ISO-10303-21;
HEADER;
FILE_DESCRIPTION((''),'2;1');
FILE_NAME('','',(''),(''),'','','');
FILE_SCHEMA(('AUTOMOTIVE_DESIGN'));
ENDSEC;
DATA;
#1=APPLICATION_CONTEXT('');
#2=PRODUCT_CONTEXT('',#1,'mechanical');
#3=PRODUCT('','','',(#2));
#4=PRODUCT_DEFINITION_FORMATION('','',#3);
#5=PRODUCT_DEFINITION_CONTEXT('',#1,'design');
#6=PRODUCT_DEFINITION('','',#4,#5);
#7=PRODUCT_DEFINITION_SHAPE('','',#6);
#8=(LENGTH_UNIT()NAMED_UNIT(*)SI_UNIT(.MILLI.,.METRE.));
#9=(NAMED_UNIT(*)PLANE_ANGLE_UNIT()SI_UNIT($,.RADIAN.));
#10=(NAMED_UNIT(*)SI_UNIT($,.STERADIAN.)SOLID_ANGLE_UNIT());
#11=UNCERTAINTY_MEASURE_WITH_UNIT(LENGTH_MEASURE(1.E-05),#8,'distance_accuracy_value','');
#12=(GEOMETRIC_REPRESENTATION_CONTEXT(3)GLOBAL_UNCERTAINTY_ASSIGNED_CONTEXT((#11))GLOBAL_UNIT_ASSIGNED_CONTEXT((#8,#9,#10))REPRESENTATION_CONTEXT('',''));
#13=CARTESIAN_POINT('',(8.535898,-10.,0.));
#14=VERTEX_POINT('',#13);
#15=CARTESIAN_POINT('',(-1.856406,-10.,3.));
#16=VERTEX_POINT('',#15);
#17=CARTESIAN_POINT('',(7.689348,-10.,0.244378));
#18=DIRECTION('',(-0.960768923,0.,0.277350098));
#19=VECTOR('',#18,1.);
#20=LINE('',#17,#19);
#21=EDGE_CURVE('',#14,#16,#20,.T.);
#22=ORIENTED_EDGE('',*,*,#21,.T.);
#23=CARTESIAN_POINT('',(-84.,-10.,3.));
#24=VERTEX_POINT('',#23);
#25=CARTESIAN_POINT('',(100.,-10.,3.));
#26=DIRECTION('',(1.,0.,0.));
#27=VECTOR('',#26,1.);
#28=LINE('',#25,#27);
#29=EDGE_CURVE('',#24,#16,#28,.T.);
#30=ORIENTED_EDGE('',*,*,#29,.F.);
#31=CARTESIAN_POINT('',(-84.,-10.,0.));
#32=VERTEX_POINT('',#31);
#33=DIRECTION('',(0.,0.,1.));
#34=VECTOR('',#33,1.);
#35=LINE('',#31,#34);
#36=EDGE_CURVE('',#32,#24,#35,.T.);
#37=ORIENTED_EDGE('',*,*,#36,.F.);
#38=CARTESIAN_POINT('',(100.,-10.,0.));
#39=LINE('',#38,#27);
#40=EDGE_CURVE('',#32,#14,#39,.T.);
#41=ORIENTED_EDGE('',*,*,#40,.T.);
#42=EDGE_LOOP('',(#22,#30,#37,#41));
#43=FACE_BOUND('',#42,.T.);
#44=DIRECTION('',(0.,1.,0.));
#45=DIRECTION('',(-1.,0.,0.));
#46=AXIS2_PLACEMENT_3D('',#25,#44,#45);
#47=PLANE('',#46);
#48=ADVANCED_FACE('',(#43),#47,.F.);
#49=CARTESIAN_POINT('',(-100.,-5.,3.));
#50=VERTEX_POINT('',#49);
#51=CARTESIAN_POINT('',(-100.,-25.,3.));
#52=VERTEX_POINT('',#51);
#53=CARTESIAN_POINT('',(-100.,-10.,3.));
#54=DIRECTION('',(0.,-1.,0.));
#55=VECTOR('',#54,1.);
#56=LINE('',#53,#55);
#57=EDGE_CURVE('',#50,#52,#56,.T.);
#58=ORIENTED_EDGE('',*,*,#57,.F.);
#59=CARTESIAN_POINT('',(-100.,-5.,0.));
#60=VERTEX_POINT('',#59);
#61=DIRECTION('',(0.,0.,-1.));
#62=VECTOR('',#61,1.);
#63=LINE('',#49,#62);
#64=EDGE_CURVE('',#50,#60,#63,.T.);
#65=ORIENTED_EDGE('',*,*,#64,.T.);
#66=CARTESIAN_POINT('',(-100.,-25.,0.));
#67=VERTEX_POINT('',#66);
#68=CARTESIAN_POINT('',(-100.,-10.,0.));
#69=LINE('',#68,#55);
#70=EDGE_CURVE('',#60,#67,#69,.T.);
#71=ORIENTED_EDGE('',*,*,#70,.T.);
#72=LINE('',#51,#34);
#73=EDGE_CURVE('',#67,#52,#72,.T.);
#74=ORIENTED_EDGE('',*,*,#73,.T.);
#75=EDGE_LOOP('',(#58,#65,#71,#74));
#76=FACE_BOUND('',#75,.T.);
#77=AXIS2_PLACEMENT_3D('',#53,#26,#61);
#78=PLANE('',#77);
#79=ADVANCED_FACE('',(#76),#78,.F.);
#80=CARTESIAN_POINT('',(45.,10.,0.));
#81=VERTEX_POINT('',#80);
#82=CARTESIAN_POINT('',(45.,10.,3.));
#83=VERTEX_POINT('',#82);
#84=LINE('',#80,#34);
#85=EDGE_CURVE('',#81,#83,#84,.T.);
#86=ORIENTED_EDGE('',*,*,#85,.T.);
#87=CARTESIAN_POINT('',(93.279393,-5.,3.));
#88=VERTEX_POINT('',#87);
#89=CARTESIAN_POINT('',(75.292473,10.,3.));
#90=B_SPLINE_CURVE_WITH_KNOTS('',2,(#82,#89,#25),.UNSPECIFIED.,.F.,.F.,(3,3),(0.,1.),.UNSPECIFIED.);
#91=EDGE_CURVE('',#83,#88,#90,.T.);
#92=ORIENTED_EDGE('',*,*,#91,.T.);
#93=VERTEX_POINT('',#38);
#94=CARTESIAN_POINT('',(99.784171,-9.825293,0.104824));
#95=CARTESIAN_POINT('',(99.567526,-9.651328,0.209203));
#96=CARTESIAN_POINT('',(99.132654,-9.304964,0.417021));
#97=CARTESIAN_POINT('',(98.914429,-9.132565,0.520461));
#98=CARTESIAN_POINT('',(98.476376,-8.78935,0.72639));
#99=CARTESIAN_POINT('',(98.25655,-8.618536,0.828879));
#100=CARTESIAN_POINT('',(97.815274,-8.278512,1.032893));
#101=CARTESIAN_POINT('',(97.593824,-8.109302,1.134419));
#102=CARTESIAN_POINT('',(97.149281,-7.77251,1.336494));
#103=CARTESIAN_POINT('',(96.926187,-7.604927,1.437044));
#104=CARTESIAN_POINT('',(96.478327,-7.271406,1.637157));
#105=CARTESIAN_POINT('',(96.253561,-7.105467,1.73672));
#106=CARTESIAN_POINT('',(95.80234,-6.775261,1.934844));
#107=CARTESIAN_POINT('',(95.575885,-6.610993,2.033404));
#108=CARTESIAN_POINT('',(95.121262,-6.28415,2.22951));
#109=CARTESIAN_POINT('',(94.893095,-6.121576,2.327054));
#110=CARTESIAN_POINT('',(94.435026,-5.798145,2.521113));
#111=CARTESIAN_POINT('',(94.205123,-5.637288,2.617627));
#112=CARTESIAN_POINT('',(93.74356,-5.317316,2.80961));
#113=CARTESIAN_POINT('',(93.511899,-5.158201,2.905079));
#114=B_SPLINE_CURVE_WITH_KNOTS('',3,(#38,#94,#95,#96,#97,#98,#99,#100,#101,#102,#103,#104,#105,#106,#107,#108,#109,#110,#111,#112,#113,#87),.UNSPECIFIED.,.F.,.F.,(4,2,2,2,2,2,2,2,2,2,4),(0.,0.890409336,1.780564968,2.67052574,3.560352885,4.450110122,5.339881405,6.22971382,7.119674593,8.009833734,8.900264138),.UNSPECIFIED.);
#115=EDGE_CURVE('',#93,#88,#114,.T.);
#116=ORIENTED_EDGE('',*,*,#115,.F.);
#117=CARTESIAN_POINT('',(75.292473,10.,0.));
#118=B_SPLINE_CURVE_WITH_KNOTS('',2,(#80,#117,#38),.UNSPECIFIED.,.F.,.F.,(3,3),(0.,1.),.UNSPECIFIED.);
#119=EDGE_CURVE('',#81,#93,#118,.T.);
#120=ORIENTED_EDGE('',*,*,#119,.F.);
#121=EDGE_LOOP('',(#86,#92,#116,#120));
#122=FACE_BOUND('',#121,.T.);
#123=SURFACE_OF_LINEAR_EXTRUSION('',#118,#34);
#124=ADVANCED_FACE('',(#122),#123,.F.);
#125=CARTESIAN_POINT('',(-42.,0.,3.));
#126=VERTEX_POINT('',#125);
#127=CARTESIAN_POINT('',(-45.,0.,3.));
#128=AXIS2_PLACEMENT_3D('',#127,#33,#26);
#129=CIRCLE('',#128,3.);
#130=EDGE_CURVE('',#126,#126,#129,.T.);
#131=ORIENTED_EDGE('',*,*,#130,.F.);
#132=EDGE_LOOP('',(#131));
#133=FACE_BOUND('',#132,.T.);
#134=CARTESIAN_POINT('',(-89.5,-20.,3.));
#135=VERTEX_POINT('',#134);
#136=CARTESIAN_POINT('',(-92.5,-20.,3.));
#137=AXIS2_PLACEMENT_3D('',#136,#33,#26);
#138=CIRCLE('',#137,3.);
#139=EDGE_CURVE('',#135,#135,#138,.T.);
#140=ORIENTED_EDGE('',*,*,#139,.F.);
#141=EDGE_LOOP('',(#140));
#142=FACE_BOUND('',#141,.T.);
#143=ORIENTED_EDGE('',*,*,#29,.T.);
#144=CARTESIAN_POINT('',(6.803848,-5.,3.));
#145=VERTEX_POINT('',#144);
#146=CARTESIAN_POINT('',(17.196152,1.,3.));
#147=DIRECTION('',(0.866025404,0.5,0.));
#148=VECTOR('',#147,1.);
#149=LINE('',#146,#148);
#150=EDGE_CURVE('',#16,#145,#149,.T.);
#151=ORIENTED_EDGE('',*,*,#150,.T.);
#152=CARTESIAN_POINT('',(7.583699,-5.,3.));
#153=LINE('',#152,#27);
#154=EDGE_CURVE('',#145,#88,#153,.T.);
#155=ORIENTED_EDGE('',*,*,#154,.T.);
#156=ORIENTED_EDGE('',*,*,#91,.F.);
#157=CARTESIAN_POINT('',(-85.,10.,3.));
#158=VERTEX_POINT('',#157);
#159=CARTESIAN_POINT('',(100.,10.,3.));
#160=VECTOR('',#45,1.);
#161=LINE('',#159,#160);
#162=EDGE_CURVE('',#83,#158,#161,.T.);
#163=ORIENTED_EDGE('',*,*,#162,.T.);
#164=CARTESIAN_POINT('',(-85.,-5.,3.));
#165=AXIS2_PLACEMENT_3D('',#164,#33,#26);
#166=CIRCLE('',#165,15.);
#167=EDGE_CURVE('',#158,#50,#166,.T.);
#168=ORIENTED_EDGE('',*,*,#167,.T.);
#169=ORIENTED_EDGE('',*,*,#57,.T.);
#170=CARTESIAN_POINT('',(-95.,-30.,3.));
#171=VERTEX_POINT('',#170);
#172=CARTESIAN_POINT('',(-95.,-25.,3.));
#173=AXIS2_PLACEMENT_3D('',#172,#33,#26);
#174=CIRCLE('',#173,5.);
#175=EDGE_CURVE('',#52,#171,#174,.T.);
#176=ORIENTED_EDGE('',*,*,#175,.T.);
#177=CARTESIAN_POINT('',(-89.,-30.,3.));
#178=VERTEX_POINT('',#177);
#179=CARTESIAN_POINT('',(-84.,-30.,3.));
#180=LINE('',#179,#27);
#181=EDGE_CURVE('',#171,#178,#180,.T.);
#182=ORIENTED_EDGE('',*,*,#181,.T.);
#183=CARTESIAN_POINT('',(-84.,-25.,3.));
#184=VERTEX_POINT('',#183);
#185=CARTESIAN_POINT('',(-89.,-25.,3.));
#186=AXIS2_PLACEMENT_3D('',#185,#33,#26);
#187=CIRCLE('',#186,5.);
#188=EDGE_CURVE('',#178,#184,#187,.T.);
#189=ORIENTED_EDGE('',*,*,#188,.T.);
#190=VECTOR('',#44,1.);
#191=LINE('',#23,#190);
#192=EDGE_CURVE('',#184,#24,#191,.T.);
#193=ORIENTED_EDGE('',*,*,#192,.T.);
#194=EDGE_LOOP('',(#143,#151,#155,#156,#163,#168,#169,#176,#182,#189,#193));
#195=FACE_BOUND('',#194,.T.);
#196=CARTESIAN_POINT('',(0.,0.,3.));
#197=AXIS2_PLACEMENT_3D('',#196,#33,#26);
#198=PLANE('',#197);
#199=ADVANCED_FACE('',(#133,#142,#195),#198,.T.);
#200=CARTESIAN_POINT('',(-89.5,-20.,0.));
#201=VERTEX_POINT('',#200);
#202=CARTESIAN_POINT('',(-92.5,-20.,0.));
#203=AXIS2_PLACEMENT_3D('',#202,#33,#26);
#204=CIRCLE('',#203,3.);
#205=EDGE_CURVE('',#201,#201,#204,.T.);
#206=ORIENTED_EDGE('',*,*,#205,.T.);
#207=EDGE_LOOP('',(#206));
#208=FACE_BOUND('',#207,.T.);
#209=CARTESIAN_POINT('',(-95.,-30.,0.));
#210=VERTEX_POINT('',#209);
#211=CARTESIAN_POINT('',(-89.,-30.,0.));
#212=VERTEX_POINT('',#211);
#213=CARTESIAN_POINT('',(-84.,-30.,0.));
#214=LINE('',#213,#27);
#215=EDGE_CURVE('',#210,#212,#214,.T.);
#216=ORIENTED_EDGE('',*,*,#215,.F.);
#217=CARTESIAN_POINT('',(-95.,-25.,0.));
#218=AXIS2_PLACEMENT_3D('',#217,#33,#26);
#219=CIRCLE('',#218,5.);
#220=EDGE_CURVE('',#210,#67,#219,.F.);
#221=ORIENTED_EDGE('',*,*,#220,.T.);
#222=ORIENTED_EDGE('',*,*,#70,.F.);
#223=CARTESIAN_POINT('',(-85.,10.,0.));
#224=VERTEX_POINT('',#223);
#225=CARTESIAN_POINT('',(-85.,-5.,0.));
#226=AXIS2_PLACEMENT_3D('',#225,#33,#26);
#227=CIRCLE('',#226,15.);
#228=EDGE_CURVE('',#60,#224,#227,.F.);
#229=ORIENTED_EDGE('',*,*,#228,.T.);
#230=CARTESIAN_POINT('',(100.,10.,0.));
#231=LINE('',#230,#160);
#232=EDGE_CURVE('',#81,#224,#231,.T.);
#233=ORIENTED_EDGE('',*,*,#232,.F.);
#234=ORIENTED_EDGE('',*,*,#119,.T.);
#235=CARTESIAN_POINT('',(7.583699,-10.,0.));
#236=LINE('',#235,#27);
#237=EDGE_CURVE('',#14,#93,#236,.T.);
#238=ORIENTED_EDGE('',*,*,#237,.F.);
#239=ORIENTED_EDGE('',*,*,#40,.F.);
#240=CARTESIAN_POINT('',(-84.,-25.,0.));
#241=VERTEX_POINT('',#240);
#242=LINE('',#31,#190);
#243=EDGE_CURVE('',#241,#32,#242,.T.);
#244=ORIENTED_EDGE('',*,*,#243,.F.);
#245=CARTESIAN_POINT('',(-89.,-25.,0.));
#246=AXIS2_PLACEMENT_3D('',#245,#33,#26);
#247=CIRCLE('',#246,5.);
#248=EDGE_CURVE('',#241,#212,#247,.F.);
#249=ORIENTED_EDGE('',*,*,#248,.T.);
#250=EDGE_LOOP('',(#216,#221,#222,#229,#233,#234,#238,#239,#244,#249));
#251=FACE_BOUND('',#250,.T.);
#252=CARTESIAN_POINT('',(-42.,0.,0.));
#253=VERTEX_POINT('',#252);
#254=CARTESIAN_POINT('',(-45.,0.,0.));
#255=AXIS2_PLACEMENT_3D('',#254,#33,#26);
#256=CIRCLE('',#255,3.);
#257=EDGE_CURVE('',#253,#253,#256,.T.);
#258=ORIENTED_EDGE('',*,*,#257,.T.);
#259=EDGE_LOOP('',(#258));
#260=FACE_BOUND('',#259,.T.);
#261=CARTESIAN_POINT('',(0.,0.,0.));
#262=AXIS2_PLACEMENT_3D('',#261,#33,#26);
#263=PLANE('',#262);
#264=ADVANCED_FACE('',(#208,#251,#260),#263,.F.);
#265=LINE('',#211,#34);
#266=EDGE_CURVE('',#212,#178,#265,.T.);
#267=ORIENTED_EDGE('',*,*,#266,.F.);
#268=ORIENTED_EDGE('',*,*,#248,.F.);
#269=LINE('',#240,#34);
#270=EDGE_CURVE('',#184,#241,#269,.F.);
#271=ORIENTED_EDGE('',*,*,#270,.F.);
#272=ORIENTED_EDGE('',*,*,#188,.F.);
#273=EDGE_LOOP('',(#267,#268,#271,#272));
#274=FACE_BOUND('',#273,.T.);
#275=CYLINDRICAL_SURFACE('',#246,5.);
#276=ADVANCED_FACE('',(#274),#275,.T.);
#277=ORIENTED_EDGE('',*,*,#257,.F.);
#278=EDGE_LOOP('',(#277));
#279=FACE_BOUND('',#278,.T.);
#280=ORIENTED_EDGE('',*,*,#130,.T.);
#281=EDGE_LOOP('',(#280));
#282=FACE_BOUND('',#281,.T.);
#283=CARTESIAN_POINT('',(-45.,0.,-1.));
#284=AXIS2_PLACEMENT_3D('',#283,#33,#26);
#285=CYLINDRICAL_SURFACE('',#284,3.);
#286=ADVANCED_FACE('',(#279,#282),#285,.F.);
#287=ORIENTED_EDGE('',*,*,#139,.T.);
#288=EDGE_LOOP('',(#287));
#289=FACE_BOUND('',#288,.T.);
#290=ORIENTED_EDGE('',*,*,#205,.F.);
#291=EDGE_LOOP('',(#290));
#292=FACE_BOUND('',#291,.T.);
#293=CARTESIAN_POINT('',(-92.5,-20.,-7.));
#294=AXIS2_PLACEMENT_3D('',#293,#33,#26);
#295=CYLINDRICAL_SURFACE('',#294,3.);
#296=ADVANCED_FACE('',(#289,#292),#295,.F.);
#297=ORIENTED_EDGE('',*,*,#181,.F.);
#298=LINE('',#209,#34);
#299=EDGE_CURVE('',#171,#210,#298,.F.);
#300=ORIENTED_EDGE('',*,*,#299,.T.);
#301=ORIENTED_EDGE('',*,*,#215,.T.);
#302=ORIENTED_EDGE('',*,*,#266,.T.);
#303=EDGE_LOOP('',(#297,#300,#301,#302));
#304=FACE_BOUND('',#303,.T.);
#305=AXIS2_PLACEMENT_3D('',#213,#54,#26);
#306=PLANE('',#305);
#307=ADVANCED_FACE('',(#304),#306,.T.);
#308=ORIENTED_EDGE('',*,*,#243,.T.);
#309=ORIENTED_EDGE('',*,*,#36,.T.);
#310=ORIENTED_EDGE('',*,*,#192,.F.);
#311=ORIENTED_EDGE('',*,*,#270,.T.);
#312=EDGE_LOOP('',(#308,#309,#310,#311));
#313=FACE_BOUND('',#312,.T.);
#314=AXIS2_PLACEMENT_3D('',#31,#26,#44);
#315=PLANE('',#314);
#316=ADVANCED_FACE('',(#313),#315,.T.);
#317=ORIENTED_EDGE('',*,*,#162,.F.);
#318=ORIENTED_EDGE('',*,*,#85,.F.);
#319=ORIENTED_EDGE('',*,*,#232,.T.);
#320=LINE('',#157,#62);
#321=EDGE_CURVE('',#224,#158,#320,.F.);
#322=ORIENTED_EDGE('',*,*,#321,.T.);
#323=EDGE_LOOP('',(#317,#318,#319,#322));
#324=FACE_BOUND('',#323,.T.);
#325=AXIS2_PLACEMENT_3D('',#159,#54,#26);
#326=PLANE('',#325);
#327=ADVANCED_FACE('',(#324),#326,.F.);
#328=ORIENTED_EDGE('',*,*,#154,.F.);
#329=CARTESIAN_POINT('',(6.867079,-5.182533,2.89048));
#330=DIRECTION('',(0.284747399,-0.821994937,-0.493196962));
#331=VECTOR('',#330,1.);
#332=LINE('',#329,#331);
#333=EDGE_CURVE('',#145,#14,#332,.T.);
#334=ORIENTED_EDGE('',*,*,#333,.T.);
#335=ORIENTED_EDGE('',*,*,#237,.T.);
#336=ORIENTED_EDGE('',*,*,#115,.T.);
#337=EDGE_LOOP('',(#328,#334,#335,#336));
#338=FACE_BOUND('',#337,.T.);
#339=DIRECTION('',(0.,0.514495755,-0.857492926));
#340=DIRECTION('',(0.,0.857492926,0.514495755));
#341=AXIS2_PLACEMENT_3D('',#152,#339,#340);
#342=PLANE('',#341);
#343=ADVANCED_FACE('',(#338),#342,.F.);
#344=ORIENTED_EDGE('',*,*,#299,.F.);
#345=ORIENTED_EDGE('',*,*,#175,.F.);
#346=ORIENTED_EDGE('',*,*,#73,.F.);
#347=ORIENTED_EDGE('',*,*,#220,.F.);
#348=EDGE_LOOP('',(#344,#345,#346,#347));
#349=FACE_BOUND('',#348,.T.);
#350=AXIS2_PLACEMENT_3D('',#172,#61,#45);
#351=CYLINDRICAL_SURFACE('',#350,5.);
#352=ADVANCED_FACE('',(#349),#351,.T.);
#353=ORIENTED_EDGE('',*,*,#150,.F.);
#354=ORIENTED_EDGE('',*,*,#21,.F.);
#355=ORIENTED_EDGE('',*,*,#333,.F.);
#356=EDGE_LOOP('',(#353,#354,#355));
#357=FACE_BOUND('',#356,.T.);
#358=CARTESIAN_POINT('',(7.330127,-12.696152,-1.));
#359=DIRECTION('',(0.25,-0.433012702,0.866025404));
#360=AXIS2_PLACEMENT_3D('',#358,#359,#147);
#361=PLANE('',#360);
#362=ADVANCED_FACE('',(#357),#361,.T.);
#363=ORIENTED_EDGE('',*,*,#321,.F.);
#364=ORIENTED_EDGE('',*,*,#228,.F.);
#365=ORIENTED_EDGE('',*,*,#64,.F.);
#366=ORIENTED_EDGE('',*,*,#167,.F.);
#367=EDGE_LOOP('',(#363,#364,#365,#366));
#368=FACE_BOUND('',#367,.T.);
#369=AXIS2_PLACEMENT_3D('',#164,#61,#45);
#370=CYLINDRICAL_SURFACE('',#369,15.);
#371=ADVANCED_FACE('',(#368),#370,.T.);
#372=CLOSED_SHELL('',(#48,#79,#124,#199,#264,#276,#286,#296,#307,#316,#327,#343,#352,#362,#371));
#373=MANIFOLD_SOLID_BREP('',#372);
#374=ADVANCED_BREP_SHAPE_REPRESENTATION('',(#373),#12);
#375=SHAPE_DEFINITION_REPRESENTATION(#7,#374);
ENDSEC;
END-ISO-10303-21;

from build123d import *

# Parameters (mm, degrees)
SKETCH_1_W          = 200
SKETCH_1_H          = 20
EXTRUDE_1_DEPTH     = 3
CUT_EXTRUDE_1_REACH = 202.272
CHAMFER_1_SIZE      = 4
CHAMFER_1_SIZE_2    = 6.92820323
CUT_EXTRUDE_2_DEPTH = 101.543522914
SKETCH_5_R          = 3
CUT_EXTRUDE_3_DEPTH = 4
SKETCH_8_W          = 16
SKETCH_8_H          = 20
EXTRUDE_2_DEPTH     = 3
SKETCH_7_R          = 3
CUT_EXTRUDE_5_DEPTH = 10
FILLET_1_R          = 15
FILLET_2_R          = 5


with BuildPart() as part:
    # 草图1 → 凸台-拉伸1 (new body)
    with BuildSketch(Plane.XY):
        Rectangle(SKETCH_1_W, SKETCH_1_H)
    extrude(amount=EXTRUDE_1_DEPTH)

    # 切除-拉伸1: up to this plane
    cut_extrude_1_end = Plane(origin=(7.330127019, -12.696152423, 0), z_dir=(-0.49999999999999445, 0.8660254037844419, 0))
    # 草图3 → 切除-拉伸1 (cut, up to the surface)
    with BuildSketch(Plane(origin=(100, 0, 0), x_dir=(0, 0, -1), z_dir=(1, 0, 0)), mode=Mode.PRIVATE) as cut_extrude_1_sk1:
        Polygon((-3, -5), (0, -10), (-3, -10), align=None)
    cut_extrude_1_tool1 = split(extrude(cut_extrude_1_sk1.sketch, amount=-CUT_EXTRUDE_1_REACH, mode=Mode.PRIVATE), bisect_by=cut_extrude_1_end, keep=Keep.BOTH, mode=Mode.PRIVATE)
    add(cut_extrude_1_tool1.solids().sort_by_distance((100, -8.333333, 2))[0], mode=Mode.SUBTRACT)

    # 倒角1
    # the kernel refuses this chamfer: 6.92820323, 4 mm, written as the material it takes off along each edge
    with BuildSketch(Plane(origin=(-3.522514528, -18.961927941, 3), x_dir=(0.02894693120133512, -0.05013755556391397, -0.9983227437537926), z_dir=(0.8660254037844419, 0.49999999999999445, 0))) as chamfer_1_piece_1_section:
        Polygon((CHAMFER_1_SIZE * 0.998322743754, CHAMFER_1_SIZE * 0.0578938624027), (-CHAMFER_1_SIZE_2 * 0.057893862405, CHAMFER_1_SIZE_2 * 0.998322743793), (0, 0), align=None)
    chamfer_1_piece_1 = extrude(amount=45.847711765, mode=Mode.PRIVATE)
    chamfer_1_piece_1 = split(chamfer_1_piece_1, bisect_by=Plane(origin=(9.642486401, -7.716503268, 1.370098039), z_dir=(0, -0.5144957554275265, 0.8574929257125443)), keep=Keep.TOP, mode=Mode.PRIVATE)
    add(chamfer_1_piece_1, mode=Mode.SUBTRACT)

    # 草图4 → 切除-拉伸2 (cut, through all)
    with BuildSketch(Plane.XY.offset(3)):
        with BuildLine():
            Line((45, 10), (45, 14.118329336))
            Line((45, 14.118329336), (100, 14.118329336))
            Line((100, 14.118329336), (100, -10))
            add(Edge.make_bspline(
                [(100, -10), (75.292472647, 10), (45, 10)],
                knots=[0, 0, 0, 1, 1, 1], degree=2))
        make_face()
    extrude(amount=-CUT_EXTRUDE_2_DEPTH, mode=Mode.SUBTRACT)

    # 草图5 → 切除-拉伸3 (cut)
    with BuildSketch(Plane.XY.offset(3)):
        with Locations((-45, 0)):
            Circle(SKETCH_5_R)
    extrude(amount=-CUT_EXTRUDE_3_DEPTH, mode=Mode.SUBTRACT)

    # 草图8 → 凸台-拉伸2 (add)
    with BuildSketch(Plane.XY.offset(3)):
        with Locations((-92, -20)):
            Rectangle(SKETCH_8_W, SKETCH_8_H)
    extrude(amount=-EXTRUDE_2_DEPTH)

    # 草图7 → 切除-拉伸5 (cut)
    with BuildSketch(Plane.XY.offset(3)):
        with Locations((-92.5, -20)):
            Circle(SKETCH_7_R)
    extrude(amount=-CUT_EXTRUDE_5_DEPTH, mode=Mode.SUBTRACT)

    # 圆角1
    fillet_1_edges = [part.edges().sort_by_distance(p)[0] for p in [
        (-100, 10, 1.5),
    ]]
    fillet(fillet_1_edges, radius=FILLET_1_R)

    # 圆角2
    fillet_2_edges = [part.edges().sort_by_distance(p)[0] for p in [
        (-84, -30, 1.5),
        (-100, -30, 1.5),
    ]]
    fillet(fillet_2_edges, radius=FILLET_2_R)


solid = part.part
